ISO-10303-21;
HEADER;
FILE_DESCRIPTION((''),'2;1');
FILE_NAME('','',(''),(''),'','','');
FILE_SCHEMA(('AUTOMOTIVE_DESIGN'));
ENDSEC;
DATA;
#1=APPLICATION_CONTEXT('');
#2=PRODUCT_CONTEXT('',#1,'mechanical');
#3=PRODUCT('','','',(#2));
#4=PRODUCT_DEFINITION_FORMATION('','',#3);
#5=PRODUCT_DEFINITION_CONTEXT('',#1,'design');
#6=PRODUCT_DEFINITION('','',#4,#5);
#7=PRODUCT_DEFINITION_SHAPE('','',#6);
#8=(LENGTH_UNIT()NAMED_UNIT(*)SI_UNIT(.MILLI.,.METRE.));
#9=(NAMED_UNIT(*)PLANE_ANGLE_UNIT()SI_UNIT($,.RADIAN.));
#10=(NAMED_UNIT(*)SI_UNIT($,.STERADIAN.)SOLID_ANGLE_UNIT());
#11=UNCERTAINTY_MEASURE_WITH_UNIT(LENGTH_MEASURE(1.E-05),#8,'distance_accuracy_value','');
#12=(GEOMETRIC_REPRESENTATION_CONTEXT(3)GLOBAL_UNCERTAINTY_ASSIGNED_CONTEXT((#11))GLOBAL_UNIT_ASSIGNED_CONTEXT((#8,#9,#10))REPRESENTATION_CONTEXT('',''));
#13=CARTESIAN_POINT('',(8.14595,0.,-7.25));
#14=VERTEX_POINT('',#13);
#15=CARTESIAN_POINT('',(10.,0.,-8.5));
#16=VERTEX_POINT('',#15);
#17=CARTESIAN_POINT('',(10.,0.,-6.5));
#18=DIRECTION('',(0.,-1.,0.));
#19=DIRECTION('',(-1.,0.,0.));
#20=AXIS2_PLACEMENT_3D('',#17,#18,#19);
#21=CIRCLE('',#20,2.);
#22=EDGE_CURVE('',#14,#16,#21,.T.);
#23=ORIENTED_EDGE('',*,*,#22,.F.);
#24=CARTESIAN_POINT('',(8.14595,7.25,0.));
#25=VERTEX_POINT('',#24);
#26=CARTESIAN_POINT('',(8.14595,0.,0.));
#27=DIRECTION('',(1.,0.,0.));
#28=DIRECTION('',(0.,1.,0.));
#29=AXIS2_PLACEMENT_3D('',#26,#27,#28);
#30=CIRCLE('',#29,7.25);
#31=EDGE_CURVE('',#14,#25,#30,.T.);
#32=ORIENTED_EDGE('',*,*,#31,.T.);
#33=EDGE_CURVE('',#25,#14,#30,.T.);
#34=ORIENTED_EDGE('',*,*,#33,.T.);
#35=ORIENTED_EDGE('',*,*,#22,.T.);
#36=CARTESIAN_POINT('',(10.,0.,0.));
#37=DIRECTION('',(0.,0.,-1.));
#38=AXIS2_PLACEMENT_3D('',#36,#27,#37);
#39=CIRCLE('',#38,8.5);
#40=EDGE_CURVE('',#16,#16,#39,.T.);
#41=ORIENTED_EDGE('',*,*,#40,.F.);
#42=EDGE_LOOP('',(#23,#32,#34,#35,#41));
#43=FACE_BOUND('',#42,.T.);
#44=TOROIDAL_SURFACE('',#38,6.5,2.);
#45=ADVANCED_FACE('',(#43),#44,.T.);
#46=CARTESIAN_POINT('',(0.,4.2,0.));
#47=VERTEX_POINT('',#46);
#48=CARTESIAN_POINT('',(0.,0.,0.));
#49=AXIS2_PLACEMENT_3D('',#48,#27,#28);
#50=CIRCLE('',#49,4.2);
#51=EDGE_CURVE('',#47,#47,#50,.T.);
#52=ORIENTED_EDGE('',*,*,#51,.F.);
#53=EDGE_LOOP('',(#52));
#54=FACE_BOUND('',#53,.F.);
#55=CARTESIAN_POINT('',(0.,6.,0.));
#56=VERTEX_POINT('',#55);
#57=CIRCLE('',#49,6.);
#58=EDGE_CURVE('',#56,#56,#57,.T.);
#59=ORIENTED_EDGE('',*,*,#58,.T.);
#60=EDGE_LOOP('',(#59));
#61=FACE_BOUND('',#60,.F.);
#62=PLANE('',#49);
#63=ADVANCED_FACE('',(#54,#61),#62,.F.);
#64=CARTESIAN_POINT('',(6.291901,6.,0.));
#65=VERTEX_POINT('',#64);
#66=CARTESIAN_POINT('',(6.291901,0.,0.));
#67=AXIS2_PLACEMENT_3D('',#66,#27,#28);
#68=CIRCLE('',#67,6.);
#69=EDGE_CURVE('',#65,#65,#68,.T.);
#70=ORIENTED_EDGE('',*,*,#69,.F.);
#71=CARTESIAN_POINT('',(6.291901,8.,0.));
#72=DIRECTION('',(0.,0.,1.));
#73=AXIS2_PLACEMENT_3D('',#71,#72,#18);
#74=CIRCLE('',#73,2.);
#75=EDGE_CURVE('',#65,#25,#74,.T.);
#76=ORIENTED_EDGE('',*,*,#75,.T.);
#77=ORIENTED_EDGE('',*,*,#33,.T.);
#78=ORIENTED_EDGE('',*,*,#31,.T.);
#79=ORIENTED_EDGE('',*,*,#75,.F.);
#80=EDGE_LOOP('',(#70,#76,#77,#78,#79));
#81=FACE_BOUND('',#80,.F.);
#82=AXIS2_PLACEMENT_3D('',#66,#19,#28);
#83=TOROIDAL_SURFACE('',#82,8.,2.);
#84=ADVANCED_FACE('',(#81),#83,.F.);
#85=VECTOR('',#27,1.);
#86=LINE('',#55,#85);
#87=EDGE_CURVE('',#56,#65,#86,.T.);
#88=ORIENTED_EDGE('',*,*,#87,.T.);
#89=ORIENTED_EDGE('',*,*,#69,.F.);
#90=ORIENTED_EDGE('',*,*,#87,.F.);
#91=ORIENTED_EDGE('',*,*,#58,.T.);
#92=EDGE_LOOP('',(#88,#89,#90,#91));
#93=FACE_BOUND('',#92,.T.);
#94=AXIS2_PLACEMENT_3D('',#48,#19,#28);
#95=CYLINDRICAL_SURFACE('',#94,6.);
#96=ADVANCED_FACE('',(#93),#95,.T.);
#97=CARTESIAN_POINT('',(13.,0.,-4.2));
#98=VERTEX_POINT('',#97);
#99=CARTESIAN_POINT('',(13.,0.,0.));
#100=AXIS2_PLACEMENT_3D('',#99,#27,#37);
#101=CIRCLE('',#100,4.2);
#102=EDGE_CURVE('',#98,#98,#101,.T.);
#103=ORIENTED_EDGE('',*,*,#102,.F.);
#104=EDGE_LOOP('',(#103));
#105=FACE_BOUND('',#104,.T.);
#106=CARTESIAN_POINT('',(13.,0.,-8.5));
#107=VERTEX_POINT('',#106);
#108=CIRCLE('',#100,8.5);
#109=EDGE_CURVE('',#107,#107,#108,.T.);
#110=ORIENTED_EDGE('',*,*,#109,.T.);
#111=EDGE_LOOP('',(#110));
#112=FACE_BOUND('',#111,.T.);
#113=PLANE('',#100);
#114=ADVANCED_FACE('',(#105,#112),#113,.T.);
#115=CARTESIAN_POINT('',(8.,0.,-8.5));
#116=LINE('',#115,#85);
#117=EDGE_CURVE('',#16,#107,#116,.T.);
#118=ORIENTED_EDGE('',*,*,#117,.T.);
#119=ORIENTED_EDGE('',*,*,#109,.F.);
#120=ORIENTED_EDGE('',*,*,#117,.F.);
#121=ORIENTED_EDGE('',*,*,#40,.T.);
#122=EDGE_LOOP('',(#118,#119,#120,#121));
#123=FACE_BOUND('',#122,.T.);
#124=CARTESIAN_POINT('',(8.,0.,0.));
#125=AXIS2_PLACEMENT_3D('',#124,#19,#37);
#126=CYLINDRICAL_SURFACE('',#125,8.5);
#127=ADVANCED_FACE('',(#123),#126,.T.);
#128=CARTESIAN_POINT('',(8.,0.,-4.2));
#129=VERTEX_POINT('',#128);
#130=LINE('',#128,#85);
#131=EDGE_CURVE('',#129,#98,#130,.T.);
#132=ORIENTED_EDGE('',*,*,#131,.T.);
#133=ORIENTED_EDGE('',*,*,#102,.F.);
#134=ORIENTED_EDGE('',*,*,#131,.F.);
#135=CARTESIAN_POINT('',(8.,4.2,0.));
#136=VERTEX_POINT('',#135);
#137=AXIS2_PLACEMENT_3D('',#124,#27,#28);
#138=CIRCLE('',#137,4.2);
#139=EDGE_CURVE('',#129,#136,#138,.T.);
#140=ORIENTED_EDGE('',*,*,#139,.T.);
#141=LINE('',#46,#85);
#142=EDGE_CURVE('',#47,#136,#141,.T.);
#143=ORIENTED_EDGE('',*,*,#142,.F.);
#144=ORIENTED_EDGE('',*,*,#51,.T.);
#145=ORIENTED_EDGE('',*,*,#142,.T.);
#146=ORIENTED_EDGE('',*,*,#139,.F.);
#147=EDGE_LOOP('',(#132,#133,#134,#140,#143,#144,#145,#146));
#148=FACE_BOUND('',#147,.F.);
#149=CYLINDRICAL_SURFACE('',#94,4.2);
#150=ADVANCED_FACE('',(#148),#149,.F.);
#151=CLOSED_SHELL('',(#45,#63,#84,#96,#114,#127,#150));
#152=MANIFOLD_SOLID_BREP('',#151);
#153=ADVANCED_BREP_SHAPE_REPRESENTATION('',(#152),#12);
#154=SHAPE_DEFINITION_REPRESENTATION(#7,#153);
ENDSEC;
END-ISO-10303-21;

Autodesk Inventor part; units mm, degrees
ref_plane "YZ Plane" through (0, 0, 0) normal (1, 0, 0) x (0, 1, 0)
ref_plane "XZ Plane" through (0, 0, 0) normal (0, 1, 0) x (-1, 0, 0)
ref_plane "XY Plane" through (0, 0, 0) normal (0, 0, 1) x (1, 0, 0)
sketch "Sketch1" plane through (0, 0, 0) normal (1, 0, 0) x (0, 1, 0)
  circle A0 centre (0, 0) radius 4.2
  circle A1 centre (0, 0) radius 6
  dimension "d0" = 8.4
  dimension "d1" = 12
extrude "Extrusion1" add sketch "Sketch1" along normal blind 8
sketch "Sketch2" plane through (8, 0, 0) normal (1, 0, 0) x (0, 0, -1)
  circle A0 centre (0, 0) radius 8.5
  circle A1 centre (0, 0) radius 4.2 projected
  dimension "d4" = 17
extrude "Extrusion2" add sketch "Sketch2" along normal blind 5
fillet "Fillet1" radius 2 2 edges at (8, 0, 8.5) (8, -6, 0)
properties part number "Adaptador_Perno_Cojinete" material "ABS Plastic"
